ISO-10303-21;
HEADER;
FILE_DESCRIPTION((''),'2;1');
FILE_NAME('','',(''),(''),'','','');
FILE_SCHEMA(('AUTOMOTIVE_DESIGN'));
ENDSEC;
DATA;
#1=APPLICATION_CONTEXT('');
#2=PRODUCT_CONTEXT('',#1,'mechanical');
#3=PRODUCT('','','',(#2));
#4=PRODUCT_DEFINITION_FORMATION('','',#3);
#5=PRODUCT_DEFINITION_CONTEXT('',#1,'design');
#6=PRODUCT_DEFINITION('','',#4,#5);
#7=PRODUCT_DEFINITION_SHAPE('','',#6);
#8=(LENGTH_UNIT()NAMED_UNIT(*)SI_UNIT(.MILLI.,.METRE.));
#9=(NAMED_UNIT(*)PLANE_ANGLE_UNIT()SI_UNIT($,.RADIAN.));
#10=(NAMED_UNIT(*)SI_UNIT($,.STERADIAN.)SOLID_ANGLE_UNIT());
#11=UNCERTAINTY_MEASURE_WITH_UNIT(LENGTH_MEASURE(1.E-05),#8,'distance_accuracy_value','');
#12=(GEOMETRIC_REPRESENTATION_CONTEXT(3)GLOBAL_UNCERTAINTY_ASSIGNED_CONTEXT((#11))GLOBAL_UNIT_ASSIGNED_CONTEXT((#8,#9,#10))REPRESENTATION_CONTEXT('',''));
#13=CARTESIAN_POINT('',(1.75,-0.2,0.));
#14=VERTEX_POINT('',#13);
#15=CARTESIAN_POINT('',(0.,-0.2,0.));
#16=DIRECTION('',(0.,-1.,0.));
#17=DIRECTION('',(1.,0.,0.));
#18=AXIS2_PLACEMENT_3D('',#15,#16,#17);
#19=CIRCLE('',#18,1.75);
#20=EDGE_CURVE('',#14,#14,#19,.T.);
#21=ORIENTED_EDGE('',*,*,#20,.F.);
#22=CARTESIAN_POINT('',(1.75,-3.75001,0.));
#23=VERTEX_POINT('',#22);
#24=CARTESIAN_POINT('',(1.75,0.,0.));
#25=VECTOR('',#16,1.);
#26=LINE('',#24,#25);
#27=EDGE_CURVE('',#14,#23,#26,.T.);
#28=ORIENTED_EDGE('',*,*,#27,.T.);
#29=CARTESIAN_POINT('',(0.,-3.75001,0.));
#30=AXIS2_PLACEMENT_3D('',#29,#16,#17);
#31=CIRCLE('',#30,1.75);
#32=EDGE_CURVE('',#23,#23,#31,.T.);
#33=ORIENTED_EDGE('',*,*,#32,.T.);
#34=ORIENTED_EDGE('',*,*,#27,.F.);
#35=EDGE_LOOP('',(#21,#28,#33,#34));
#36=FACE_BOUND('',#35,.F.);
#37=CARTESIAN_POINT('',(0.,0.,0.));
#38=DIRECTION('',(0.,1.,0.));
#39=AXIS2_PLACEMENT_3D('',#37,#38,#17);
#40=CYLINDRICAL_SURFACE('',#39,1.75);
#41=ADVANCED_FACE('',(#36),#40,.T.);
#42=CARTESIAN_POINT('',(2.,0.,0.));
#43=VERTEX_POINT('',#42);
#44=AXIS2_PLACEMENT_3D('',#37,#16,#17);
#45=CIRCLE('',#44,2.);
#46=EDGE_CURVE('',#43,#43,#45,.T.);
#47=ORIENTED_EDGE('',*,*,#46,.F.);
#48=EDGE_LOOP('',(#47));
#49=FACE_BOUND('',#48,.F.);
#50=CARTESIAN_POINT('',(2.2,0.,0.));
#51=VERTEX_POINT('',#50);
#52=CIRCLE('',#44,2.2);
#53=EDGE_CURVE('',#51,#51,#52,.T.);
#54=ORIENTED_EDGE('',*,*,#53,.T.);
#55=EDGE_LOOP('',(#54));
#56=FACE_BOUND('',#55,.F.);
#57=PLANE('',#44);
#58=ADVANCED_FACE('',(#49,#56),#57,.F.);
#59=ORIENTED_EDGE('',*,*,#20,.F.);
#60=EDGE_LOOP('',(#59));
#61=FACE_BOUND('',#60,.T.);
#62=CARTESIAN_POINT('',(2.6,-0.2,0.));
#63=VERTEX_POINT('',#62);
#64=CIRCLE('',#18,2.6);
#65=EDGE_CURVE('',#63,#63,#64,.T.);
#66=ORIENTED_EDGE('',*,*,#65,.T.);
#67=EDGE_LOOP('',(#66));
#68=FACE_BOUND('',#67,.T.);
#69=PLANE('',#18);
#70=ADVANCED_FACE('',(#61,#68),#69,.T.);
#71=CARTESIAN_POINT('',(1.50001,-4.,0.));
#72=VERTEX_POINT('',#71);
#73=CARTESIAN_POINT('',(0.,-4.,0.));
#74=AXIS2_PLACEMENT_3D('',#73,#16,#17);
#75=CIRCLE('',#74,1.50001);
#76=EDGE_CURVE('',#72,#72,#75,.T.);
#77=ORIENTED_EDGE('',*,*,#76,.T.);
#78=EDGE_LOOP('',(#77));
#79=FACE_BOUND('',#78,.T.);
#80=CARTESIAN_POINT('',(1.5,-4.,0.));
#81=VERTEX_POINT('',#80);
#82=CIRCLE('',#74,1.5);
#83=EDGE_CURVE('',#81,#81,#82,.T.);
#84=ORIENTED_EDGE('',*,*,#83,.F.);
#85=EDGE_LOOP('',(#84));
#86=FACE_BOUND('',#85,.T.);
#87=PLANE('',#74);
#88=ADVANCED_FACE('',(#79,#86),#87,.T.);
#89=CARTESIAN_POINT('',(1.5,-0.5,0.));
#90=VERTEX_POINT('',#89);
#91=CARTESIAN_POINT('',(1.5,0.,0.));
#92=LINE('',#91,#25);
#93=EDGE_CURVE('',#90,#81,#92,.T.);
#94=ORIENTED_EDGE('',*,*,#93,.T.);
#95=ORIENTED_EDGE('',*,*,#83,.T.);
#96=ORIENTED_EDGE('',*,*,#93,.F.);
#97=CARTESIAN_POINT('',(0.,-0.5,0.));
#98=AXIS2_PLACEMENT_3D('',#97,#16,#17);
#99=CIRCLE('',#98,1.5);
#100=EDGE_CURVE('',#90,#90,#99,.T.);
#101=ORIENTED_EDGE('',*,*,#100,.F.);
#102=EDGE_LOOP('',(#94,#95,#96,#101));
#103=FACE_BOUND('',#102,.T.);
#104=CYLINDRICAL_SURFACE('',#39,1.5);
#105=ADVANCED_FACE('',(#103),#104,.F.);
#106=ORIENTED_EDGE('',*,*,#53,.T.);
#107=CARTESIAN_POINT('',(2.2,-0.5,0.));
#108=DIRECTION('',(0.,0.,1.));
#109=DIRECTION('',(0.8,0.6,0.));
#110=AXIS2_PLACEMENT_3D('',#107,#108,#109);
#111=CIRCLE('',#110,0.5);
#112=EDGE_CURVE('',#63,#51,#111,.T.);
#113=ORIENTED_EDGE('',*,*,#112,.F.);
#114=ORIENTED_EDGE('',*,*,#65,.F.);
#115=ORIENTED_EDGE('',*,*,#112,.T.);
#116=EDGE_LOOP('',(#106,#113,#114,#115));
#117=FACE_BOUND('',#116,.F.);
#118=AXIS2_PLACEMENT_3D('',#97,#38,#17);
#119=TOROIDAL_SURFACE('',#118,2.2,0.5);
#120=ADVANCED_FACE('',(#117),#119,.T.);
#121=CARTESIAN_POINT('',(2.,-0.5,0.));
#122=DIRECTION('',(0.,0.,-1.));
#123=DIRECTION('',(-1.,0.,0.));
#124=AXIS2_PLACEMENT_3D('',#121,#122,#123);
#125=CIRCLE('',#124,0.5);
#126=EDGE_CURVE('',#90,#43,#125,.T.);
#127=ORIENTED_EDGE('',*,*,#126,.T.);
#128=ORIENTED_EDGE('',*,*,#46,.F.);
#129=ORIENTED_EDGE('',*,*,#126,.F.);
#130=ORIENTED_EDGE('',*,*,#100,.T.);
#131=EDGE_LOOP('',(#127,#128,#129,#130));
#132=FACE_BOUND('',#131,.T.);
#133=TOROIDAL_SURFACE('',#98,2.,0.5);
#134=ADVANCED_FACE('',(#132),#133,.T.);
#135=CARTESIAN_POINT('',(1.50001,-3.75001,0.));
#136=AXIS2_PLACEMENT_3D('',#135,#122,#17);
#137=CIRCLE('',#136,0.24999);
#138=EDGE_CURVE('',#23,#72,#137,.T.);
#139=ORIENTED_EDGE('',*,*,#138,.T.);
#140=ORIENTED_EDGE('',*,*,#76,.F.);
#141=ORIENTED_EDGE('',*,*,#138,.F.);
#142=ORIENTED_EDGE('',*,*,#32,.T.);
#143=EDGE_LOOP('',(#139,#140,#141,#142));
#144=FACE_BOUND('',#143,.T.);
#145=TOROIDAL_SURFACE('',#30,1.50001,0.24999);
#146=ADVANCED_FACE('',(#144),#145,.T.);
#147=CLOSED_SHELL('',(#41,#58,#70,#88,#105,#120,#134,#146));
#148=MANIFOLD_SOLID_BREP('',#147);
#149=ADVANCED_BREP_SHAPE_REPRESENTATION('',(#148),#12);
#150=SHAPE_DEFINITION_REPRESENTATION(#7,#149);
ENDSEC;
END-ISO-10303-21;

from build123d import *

# Parameters (mm, degrees)
F0_R     = 1.75
F0_R_2   = 1.5
F1_DEPTH = 4
F2_R     = 2.6
F2_R_2   = 1.75
F3_DEPTH = 0.2
F4_R     = 0.24999


# Not quite as in the source:
# - a fillet or chamfer that OpenCascade refuses, or shapes differently, is made with other operations: its cross-section is extruded or revolved along the edge and cut away or added
# - a fillet or chamfer is up to 0.001 mm smaller than in the source, because OpenCascade refuses the exact size


with BuildPart() as f1:
    # F0 (on Front) → F1 (new body)
    with BuildSketch(Plane.XZ):
        Circle(F0_R)
        Circle(F0_R_2, mode=Mode.SUBTRACT)
    extrude(amount=F1_DEPTH)

    # F2 (on Front) → F3 (join)
    with BuildSketch(Plane.XZ):
        Circle(F2_R)
        Circle(F2_R_2, mode=Mode.SUBTRACT)
    extrude(amount=F3_DEPTH)

    # F4 (radius 0.25 in the source; OpenCascade refuses exactly that, so slightly less here)
    f4_edges = [f1.edges().sort_by_distance(p)[0] for p in [
        (-1.75, -4, 0),
    ]]
    fillet(f4_edges, radius=F4_R)

    # F5: fillet of radius 0.5 on 2 edges, made by hand

    # F5_s1 → F5_t2 (revolve, cut)
    with BuildSketch(Plane.XY):
        with BuildLine():
            ThreePointArc((2.6, -0.2), (2.4236067977, -0.0527864045), (2.2, 0))
            Line((2.2, 0), (2.6, 0))
            Line((2.6, 0), (2.6, -0.2))
        make_face()
    revolve(axis=Axis((0, 0, 0), (0, -1, 0)), mode=Mode.SUBTRACT)

    # F5_s3 → F5_t4 (revolve, cut)
    with BuildSketch(Plane.XY):
        with BuildLine():
            ThreePointArc((1.5, -0.5), (1.6464466094, -0.1464466094), (2, 0))
            Line((2, 0), (1.5, 0))
            Line((1.5, 0), (1.5, -0.5))
        make_face()
    revolve(axis=Axis((0, 0, 0), (0, -1, 0)), mode=Mode.SUBTRACT)


solid = f1.part
